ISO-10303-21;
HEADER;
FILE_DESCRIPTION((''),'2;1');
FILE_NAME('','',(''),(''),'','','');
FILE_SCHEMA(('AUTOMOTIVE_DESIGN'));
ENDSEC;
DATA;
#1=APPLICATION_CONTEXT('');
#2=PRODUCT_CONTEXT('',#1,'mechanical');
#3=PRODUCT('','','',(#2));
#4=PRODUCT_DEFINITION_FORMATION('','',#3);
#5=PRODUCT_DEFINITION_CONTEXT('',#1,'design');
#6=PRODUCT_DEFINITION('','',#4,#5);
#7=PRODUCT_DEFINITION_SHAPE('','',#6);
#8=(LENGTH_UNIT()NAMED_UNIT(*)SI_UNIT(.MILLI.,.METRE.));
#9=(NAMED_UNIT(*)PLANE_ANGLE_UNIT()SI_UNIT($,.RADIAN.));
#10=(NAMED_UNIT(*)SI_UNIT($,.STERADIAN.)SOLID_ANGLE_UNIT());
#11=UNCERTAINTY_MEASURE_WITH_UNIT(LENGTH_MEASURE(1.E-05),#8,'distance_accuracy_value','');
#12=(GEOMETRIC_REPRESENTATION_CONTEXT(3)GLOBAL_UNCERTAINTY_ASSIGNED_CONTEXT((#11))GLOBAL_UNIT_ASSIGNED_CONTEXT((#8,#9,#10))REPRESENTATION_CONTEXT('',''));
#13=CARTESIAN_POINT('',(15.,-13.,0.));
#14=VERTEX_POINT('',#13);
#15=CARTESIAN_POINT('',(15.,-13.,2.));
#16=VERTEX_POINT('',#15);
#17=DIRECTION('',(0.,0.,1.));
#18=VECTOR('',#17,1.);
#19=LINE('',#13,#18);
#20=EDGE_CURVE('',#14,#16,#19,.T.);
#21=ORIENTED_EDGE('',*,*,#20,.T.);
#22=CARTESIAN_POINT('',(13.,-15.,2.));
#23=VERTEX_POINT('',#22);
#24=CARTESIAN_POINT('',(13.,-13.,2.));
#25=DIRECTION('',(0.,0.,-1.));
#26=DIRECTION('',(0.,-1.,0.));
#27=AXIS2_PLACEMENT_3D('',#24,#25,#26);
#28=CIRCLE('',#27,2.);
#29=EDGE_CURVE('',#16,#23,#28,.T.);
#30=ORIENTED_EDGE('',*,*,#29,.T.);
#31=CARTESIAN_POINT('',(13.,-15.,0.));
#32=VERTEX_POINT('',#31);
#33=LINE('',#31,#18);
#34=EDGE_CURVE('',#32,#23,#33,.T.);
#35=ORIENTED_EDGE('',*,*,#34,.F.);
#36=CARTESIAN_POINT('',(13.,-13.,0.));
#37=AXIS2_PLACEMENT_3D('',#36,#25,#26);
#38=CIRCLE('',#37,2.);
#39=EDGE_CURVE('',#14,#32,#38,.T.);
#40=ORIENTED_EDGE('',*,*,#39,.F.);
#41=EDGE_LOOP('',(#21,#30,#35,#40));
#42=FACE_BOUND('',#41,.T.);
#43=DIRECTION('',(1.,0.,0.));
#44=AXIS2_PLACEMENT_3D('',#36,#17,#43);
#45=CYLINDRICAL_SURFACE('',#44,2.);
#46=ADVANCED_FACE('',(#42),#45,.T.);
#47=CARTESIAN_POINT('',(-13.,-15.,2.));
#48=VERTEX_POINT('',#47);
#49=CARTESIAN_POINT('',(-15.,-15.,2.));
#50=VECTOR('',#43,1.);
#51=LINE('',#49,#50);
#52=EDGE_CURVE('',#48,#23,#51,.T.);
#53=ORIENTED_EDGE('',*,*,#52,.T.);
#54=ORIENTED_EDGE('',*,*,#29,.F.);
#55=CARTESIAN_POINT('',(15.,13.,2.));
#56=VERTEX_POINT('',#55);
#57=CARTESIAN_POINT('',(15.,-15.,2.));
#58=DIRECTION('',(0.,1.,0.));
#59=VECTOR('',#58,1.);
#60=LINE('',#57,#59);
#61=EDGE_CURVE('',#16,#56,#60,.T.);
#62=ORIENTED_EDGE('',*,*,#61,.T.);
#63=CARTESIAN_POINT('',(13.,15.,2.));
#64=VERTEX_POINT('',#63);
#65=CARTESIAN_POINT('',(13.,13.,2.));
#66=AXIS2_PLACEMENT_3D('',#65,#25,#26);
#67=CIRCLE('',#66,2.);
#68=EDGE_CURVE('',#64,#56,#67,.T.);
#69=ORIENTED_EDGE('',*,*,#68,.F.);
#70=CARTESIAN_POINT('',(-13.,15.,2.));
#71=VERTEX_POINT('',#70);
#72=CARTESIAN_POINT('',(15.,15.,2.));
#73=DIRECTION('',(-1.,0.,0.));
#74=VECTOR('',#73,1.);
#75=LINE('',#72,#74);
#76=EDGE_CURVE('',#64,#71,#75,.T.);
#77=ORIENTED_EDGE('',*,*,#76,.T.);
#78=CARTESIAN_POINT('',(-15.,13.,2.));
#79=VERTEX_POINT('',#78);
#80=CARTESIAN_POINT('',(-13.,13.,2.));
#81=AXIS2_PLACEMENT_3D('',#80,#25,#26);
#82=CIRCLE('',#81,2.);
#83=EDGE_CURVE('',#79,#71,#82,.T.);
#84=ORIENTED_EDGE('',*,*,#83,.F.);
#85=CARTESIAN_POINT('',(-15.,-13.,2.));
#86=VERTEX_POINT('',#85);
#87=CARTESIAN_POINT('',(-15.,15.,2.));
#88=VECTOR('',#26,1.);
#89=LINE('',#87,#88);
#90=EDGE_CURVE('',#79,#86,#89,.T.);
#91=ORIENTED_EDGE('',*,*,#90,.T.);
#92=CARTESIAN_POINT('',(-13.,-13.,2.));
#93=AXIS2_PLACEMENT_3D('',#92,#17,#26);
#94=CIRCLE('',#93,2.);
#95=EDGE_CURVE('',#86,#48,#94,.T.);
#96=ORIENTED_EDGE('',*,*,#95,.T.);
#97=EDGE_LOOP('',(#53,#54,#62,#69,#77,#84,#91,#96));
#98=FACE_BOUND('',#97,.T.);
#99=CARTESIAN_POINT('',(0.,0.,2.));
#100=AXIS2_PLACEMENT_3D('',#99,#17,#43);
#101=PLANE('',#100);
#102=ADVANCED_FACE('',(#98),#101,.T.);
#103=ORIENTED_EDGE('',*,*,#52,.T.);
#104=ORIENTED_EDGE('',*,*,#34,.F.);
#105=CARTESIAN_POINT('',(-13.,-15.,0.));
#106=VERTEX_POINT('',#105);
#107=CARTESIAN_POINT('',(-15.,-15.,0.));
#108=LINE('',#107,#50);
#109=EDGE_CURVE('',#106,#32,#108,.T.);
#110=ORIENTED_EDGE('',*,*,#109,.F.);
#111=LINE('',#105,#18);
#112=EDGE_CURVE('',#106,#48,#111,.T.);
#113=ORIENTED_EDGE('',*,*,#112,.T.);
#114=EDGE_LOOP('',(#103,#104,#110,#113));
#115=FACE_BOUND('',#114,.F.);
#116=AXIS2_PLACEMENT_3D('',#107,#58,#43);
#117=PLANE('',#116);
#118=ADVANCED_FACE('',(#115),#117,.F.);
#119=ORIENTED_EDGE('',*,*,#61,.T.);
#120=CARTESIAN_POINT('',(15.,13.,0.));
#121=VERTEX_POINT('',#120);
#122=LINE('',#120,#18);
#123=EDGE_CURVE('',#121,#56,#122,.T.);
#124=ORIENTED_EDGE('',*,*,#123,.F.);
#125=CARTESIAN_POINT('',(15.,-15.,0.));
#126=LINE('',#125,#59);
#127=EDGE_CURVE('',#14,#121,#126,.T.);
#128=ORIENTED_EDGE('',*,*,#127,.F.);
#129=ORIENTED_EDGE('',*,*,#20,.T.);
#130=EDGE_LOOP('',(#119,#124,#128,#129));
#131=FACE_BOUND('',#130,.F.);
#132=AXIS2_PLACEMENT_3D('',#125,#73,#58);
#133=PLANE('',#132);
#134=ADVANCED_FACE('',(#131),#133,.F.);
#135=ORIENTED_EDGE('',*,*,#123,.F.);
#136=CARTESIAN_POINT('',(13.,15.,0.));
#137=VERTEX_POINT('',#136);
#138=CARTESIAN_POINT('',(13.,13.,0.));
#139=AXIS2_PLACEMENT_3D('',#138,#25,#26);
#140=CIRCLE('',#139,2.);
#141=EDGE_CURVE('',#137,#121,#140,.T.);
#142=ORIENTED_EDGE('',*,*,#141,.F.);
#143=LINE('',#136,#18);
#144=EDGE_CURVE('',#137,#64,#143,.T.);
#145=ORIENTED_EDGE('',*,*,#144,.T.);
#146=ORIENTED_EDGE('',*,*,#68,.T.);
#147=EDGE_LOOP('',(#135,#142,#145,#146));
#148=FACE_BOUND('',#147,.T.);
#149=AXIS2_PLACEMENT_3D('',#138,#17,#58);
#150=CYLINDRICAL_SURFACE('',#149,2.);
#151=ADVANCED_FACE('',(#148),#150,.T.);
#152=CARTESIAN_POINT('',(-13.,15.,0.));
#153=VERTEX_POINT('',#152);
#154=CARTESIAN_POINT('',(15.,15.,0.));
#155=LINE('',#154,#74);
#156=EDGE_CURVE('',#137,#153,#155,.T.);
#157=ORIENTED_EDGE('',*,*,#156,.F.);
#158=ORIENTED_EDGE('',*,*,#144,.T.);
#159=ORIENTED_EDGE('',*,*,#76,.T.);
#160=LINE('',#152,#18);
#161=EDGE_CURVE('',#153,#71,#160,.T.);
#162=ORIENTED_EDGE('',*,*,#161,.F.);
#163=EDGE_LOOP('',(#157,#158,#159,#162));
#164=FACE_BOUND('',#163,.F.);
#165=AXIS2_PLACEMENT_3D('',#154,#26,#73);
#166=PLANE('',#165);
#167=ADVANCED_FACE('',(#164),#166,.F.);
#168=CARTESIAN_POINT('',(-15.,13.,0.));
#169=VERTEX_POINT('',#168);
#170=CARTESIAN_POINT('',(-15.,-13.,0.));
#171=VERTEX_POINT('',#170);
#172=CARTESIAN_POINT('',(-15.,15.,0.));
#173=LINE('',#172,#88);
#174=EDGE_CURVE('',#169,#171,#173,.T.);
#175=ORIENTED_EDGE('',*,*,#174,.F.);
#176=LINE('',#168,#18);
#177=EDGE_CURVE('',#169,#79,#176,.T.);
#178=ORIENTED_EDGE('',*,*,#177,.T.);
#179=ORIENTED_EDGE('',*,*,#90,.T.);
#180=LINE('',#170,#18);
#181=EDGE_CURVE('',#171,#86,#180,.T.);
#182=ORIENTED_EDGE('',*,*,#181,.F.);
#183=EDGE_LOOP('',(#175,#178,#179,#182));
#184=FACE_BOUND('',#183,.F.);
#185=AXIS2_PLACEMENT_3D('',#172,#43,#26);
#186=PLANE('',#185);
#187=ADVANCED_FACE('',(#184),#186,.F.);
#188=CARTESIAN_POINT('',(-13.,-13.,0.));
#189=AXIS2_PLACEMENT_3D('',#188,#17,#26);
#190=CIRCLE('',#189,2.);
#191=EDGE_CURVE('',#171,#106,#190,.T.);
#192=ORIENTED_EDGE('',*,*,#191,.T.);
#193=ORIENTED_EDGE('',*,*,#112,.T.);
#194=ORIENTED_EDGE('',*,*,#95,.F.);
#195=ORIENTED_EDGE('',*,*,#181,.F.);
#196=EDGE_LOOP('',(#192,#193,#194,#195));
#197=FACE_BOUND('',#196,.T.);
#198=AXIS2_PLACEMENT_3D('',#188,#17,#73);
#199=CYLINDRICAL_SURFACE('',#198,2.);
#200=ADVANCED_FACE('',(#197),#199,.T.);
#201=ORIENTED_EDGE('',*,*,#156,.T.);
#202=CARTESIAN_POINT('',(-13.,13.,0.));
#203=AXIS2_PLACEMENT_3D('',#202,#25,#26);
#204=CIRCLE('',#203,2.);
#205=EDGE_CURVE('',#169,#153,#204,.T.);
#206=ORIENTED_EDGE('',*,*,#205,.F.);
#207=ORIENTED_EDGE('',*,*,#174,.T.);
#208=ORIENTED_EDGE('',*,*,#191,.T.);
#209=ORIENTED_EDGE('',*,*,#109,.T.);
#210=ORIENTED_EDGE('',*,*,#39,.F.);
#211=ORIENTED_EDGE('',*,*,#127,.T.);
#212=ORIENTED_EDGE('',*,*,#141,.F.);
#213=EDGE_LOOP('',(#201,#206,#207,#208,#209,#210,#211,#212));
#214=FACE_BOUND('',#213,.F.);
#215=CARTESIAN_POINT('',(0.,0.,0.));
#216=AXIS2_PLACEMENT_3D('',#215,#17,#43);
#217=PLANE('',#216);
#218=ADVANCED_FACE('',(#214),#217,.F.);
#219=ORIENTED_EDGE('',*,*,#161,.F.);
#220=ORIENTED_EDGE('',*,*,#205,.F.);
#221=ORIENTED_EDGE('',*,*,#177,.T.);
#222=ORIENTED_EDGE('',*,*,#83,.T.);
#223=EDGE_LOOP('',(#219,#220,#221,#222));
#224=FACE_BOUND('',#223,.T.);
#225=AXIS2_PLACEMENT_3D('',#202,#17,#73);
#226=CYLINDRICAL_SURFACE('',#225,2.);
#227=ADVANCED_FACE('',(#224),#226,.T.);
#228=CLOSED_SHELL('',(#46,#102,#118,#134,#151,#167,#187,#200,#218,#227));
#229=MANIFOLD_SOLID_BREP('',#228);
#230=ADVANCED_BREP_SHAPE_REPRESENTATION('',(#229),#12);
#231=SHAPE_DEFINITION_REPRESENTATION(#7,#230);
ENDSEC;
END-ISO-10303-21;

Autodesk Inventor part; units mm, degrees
ref_plane "YZ Plane" through (0, 0, 0) normal (1, 0, 0) x (0, 1, 0)
ref_plane "XZ Plane" through (0, 0, 0) normal (0, 1, 0) x (-1, 0, 0)
ref_plane "XY Plane" through (0, 0, 0) normal (0, 0, 1) x (1, 0, 0)
sketch "Sketch1" plane through (0, 0, 0) normal (0, 0, 1) x (1, 0, 0)
  line L0 (-15, -15) -> (15, -15)
  line L1 (15, -15) -> (15, 15)
  line L2 (15, 15) -> (-15, 15)
  line L3 (-15, 15) -> (-15, -15)
  line L4 (-15, -15) -> (15, 15) construction
  line L5 (15, -15) -> (-15, 15) construction
  point P0 (0, 0)
  dimension "d154" = 30
  dimension "d155" = 30
extrude "Plate5" add sketch "Sketch1" along normal blind 2
fillet "Corner Round1" radius 2 4 edges at (15, 15, 1) (-15, 15, 1) (-15, -15, 1) (15, -15, 1)
properties part number "PNS 766 FDS 1200 CUP 1_1600" material "Stainless Steel"
